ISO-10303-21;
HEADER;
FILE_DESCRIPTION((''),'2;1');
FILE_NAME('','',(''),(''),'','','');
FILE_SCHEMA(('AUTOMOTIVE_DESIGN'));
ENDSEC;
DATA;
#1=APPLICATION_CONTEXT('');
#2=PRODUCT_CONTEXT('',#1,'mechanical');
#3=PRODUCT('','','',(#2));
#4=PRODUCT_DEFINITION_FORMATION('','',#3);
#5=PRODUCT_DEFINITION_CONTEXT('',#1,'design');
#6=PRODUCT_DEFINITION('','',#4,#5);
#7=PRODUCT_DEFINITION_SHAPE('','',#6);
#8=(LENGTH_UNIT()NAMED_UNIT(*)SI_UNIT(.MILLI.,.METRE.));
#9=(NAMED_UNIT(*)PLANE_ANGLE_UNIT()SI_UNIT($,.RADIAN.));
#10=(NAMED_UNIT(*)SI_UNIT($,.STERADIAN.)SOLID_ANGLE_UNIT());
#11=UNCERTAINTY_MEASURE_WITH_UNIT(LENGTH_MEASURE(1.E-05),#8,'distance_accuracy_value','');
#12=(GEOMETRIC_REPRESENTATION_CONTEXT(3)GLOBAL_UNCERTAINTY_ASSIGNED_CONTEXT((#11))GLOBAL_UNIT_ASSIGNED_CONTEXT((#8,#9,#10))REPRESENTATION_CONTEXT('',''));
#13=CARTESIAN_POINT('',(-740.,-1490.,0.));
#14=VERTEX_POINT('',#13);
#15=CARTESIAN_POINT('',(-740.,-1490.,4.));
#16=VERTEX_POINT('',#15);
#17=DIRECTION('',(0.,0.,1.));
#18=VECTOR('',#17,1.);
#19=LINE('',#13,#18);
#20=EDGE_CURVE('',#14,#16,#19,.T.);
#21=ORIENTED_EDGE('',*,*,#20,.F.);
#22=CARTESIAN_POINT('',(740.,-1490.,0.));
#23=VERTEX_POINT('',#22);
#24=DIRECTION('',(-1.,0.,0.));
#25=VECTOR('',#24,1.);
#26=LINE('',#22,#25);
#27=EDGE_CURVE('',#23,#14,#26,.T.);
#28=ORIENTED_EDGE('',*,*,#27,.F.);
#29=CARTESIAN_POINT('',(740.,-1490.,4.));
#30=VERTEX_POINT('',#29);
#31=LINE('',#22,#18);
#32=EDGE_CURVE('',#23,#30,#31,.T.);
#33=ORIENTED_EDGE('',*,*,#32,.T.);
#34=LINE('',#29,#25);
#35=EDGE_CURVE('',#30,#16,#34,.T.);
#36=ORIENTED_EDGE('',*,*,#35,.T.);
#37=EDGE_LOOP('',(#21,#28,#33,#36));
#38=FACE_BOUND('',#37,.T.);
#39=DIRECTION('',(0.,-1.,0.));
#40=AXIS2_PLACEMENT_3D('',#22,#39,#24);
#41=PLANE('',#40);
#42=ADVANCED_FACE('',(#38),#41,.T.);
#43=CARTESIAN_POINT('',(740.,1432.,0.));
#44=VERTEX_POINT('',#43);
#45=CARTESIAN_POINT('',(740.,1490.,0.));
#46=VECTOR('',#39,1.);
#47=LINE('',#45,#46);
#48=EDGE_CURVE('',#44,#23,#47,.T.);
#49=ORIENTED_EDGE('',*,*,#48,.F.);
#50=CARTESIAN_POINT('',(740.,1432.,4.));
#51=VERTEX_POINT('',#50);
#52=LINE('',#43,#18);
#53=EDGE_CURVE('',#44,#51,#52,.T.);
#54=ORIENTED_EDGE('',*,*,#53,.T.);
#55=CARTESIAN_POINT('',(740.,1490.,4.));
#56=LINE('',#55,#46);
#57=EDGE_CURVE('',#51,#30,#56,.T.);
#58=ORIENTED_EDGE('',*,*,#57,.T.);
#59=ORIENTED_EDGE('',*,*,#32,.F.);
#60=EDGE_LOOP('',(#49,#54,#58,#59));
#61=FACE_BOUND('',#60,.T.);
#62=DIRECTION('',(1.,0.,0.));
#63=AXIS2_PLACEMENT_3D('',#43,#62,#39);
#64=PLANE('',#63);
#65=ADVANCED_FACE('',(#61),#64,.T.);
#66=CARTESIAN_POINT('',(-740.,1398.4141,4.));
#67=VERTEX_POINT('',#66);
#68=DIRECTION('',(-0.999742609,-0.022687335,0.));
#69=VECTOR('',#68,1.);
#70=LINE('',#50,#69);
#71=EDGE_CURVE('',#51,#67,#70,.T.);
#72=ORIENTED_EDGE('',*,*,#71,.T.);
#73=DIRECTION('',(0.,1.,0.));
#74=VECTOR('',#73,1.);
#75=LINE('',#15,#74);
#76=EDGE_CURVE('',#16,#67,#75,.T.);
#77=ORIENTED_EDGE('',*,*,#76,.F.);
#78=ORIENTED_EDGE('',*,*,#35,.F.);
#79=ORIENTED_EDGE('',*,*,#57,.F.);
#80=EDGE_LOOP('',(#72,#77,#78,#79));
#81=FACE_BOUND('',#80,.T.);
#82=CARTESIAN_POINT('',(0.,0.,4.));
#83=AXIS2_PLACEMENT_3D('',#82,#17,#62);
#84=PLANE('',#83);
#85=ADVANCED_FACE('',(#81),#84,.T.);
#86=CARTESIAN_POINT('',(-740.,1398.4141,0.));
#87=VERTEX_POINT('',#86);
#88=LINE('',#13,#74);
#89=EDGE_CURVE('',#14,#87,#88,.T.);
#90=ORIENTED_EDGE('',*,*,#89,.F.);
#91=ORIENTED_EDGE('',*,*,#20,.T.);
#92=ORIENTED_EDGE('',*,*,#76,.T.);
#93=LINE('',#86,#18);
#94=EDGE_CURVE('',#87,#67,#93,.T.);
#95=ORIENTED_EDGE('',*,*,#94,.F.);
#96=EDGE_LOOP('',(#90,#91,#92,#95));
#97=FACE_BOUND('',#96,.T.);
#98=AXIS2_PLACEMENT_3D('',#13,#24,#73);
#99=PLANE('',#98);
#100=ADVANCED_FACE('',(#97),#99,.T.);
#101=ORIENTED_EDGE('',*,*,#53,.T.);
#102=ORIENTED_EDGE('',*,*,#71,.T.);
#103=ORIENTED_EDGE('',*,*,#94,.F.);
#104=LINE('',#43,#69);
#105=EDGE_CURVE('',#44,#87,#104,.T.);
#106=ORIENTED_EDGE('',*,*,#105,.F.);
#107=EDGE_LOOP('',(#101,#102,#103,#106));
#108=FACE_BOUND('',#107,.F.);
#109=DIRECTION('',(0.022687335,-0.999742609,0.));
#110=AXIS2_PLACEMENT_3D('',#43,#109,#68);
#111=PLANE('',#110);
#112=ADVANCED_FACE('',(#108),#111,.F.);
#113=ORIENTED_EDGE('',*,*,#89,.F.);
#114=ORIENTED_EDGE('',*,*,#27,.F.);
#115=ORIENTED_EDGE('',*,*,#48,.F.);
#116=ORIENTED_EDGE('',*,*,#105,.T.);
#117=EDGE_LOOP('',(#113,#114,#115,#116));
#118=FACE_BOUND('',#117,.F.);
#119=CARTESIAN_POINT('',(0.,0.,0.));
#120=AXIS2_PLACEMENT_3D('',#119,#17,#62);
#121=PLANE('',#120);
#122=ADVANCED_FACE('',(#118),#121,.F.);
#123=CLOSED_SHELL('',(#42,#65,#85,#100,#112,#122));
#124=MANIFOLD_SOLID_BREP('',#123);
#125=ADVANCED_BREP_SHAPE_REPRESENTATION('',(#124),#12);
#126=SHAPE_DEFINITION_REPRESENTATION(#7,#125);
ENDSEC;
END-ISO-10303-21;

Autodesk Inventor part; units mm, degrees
ref_plane "YZ Plane" through (0, 0, 0) normal (1, 0, 0) x (0, 1, 0)
ref_plane "XZ Plane" through (0, 0, 0) normal (0, 1, 0) x (-1, 0, 0)
ref_plane "XY Plane" through (0, 0, 0) normal (0, 0, 1) x (1, 0, 0)
sketch "Sketch1" plane through (0, 0, 0) normal (0, 0, 1) x (1, 0, 0)
  line L0 (740, -1490) -> (-740, -1490)
  line L1 (-740, -1490) -> (-740, 1490)
  line L2 (-740, 1490) -> (740, 1490)
  line L3 (740, 1490) -> (740, -1490)
  line L4 (740, -1490) -> (-740, 1490) construction
  line L5 (-740, -1490) -> (740, 1490) construction
  line L6 (740, 1432) -> (-740, 1398.4141)
  point P0 (0, 0)
  dimension "d0" = 1480
  dimension "d1" = 2980
  dimension "d3" = 1.3
  dimension "d5" = 2922
extrude "Plate1" add sketch "Sketch1" along normal blind 4 contours L0 L1 L6 L3
sketch "Sketch3" plane through (0, 0, 4) normal (0, 0, 1) x (1, 0, 0)
  line L0 (575.4966, -928.4274) -> (575.4966, -1128.991) construction
  line L1 (575.4966, -1128.991) -> (488.2456, -1128.991) construction
  line L2 (488.2456, -1128.991) -> (488.2456, -928.4274) construction
  line L3 (488.2456, -928.4274) -> (575.4966, -928.4274) construction
  line L4 (690.2486, -1238) -> (690.2486, -1335) projected
  line L5 (690.2486, -1335) -> (686.2496, -1335) projected
  line L6 (190.12, -1238) -> (190.12, -1335) projected
  line L7 (190.12, -1335) -> (186.121, -1335) projected
  line L8 (-310.0086, -1238) -> (-310.0086, -1335) projected
  line L9 (-310.0086, -1335) -> (-314.0076, -1335) projected
  line L10 (-310.0086, 1460.5) -> (-310.0086, 1256.8333) projected
  line L11 (190.12, 1460.5) -> (190.12, 1256.5) projected
  line L12 (690.2486, 1460.5) -> (690.2486, 1256.5) projected
  line L13 (770, 1252.8333) -> (710, 1252.8333) projected
  line L14 (710, 1248.8333) -> (710, 1252.8333) projected
  line L15 (770, 756.1667) -> (710, 756.1667) projected
  line L16 (710, 752.1667) -> (710, 756.1667) projected
  line L17 (770, 259.5) -> (710, 259.5) projected
  line L18 (710, 255.5) -> (710, 259.5) projected
  line L19 (770, -237.1667) -> (710, -237.1667) projected
  line L20 (710, -241.1667) -> (710, -237.1667) projected
  line L21 (770, -733.8333) -> (710, -733.8333) projected
  line L22 (710, -737.8333) -> (710, -733.8333) projected
  line L23 (770, -1230.5) -> (710, -1230.5) projected
  line L24 (710, -1234.5) -> (710, -1230.5) projected
  line L25 (-710, 1252.8333) -> (-739.3197, 1252.8333) projected
  line L26 (-710, 1248.8333) -> (-710, 1252.8333) projected
  line L27 (-710, 756.1667) -> (-739.3197, 756.1667) projected
  line L28 (-710, 752.1667) -> (-710, 756.1667) projected
  line L29 (-710, 259.5) -> (-739.3197, 259.5) projected
  line L30 (-710, 255.5) -> (-710, 259.5) projected
  line L31 (-710, -237.1667) -> (-739.3197, -237.1667) projected
  line L32 (-710, -241.1667) -> (-710, -237.1667) projected
  line L33 (-710, -733.8333) -> (-739.3197, -733.8333) projected
  line L34 (-710, -737.8333) -> (-710, -733.8333) projected
  line L35 (-710, -1230.5) -> (-739.3197, -1230.5) projected
  line L36 (-710, -1234.5) -> (-710, -1230.5) projected
  point P0 (0, 0)
mark "Mark2"
equation "\"d0\" = Лист_ширина"
equation "\"d2\" = Thickness"
equation "\"BendRadius\" = Thickness"
equation "\"BendReliefWidth\" = Thickness"
equation "\"BendReliefDepth\" = 0.5 * Thickness"
equation "\"CornerReliefSize\" = 4 * Thickness"
equation "\"MinimumRemnant\" = 2 * Thickness"
equation "\"TransitionRadius\" = BendRadius"
equation "\"JacobiRadiusSize\" = BendRadius"
equation "\"GapSize\" = Thickness"
equation "\"Лист_ширина\" = 1480"
equation "\"Thickness\" = 4"
properties part number "GBK 2236 shield 6" material "Steel"
